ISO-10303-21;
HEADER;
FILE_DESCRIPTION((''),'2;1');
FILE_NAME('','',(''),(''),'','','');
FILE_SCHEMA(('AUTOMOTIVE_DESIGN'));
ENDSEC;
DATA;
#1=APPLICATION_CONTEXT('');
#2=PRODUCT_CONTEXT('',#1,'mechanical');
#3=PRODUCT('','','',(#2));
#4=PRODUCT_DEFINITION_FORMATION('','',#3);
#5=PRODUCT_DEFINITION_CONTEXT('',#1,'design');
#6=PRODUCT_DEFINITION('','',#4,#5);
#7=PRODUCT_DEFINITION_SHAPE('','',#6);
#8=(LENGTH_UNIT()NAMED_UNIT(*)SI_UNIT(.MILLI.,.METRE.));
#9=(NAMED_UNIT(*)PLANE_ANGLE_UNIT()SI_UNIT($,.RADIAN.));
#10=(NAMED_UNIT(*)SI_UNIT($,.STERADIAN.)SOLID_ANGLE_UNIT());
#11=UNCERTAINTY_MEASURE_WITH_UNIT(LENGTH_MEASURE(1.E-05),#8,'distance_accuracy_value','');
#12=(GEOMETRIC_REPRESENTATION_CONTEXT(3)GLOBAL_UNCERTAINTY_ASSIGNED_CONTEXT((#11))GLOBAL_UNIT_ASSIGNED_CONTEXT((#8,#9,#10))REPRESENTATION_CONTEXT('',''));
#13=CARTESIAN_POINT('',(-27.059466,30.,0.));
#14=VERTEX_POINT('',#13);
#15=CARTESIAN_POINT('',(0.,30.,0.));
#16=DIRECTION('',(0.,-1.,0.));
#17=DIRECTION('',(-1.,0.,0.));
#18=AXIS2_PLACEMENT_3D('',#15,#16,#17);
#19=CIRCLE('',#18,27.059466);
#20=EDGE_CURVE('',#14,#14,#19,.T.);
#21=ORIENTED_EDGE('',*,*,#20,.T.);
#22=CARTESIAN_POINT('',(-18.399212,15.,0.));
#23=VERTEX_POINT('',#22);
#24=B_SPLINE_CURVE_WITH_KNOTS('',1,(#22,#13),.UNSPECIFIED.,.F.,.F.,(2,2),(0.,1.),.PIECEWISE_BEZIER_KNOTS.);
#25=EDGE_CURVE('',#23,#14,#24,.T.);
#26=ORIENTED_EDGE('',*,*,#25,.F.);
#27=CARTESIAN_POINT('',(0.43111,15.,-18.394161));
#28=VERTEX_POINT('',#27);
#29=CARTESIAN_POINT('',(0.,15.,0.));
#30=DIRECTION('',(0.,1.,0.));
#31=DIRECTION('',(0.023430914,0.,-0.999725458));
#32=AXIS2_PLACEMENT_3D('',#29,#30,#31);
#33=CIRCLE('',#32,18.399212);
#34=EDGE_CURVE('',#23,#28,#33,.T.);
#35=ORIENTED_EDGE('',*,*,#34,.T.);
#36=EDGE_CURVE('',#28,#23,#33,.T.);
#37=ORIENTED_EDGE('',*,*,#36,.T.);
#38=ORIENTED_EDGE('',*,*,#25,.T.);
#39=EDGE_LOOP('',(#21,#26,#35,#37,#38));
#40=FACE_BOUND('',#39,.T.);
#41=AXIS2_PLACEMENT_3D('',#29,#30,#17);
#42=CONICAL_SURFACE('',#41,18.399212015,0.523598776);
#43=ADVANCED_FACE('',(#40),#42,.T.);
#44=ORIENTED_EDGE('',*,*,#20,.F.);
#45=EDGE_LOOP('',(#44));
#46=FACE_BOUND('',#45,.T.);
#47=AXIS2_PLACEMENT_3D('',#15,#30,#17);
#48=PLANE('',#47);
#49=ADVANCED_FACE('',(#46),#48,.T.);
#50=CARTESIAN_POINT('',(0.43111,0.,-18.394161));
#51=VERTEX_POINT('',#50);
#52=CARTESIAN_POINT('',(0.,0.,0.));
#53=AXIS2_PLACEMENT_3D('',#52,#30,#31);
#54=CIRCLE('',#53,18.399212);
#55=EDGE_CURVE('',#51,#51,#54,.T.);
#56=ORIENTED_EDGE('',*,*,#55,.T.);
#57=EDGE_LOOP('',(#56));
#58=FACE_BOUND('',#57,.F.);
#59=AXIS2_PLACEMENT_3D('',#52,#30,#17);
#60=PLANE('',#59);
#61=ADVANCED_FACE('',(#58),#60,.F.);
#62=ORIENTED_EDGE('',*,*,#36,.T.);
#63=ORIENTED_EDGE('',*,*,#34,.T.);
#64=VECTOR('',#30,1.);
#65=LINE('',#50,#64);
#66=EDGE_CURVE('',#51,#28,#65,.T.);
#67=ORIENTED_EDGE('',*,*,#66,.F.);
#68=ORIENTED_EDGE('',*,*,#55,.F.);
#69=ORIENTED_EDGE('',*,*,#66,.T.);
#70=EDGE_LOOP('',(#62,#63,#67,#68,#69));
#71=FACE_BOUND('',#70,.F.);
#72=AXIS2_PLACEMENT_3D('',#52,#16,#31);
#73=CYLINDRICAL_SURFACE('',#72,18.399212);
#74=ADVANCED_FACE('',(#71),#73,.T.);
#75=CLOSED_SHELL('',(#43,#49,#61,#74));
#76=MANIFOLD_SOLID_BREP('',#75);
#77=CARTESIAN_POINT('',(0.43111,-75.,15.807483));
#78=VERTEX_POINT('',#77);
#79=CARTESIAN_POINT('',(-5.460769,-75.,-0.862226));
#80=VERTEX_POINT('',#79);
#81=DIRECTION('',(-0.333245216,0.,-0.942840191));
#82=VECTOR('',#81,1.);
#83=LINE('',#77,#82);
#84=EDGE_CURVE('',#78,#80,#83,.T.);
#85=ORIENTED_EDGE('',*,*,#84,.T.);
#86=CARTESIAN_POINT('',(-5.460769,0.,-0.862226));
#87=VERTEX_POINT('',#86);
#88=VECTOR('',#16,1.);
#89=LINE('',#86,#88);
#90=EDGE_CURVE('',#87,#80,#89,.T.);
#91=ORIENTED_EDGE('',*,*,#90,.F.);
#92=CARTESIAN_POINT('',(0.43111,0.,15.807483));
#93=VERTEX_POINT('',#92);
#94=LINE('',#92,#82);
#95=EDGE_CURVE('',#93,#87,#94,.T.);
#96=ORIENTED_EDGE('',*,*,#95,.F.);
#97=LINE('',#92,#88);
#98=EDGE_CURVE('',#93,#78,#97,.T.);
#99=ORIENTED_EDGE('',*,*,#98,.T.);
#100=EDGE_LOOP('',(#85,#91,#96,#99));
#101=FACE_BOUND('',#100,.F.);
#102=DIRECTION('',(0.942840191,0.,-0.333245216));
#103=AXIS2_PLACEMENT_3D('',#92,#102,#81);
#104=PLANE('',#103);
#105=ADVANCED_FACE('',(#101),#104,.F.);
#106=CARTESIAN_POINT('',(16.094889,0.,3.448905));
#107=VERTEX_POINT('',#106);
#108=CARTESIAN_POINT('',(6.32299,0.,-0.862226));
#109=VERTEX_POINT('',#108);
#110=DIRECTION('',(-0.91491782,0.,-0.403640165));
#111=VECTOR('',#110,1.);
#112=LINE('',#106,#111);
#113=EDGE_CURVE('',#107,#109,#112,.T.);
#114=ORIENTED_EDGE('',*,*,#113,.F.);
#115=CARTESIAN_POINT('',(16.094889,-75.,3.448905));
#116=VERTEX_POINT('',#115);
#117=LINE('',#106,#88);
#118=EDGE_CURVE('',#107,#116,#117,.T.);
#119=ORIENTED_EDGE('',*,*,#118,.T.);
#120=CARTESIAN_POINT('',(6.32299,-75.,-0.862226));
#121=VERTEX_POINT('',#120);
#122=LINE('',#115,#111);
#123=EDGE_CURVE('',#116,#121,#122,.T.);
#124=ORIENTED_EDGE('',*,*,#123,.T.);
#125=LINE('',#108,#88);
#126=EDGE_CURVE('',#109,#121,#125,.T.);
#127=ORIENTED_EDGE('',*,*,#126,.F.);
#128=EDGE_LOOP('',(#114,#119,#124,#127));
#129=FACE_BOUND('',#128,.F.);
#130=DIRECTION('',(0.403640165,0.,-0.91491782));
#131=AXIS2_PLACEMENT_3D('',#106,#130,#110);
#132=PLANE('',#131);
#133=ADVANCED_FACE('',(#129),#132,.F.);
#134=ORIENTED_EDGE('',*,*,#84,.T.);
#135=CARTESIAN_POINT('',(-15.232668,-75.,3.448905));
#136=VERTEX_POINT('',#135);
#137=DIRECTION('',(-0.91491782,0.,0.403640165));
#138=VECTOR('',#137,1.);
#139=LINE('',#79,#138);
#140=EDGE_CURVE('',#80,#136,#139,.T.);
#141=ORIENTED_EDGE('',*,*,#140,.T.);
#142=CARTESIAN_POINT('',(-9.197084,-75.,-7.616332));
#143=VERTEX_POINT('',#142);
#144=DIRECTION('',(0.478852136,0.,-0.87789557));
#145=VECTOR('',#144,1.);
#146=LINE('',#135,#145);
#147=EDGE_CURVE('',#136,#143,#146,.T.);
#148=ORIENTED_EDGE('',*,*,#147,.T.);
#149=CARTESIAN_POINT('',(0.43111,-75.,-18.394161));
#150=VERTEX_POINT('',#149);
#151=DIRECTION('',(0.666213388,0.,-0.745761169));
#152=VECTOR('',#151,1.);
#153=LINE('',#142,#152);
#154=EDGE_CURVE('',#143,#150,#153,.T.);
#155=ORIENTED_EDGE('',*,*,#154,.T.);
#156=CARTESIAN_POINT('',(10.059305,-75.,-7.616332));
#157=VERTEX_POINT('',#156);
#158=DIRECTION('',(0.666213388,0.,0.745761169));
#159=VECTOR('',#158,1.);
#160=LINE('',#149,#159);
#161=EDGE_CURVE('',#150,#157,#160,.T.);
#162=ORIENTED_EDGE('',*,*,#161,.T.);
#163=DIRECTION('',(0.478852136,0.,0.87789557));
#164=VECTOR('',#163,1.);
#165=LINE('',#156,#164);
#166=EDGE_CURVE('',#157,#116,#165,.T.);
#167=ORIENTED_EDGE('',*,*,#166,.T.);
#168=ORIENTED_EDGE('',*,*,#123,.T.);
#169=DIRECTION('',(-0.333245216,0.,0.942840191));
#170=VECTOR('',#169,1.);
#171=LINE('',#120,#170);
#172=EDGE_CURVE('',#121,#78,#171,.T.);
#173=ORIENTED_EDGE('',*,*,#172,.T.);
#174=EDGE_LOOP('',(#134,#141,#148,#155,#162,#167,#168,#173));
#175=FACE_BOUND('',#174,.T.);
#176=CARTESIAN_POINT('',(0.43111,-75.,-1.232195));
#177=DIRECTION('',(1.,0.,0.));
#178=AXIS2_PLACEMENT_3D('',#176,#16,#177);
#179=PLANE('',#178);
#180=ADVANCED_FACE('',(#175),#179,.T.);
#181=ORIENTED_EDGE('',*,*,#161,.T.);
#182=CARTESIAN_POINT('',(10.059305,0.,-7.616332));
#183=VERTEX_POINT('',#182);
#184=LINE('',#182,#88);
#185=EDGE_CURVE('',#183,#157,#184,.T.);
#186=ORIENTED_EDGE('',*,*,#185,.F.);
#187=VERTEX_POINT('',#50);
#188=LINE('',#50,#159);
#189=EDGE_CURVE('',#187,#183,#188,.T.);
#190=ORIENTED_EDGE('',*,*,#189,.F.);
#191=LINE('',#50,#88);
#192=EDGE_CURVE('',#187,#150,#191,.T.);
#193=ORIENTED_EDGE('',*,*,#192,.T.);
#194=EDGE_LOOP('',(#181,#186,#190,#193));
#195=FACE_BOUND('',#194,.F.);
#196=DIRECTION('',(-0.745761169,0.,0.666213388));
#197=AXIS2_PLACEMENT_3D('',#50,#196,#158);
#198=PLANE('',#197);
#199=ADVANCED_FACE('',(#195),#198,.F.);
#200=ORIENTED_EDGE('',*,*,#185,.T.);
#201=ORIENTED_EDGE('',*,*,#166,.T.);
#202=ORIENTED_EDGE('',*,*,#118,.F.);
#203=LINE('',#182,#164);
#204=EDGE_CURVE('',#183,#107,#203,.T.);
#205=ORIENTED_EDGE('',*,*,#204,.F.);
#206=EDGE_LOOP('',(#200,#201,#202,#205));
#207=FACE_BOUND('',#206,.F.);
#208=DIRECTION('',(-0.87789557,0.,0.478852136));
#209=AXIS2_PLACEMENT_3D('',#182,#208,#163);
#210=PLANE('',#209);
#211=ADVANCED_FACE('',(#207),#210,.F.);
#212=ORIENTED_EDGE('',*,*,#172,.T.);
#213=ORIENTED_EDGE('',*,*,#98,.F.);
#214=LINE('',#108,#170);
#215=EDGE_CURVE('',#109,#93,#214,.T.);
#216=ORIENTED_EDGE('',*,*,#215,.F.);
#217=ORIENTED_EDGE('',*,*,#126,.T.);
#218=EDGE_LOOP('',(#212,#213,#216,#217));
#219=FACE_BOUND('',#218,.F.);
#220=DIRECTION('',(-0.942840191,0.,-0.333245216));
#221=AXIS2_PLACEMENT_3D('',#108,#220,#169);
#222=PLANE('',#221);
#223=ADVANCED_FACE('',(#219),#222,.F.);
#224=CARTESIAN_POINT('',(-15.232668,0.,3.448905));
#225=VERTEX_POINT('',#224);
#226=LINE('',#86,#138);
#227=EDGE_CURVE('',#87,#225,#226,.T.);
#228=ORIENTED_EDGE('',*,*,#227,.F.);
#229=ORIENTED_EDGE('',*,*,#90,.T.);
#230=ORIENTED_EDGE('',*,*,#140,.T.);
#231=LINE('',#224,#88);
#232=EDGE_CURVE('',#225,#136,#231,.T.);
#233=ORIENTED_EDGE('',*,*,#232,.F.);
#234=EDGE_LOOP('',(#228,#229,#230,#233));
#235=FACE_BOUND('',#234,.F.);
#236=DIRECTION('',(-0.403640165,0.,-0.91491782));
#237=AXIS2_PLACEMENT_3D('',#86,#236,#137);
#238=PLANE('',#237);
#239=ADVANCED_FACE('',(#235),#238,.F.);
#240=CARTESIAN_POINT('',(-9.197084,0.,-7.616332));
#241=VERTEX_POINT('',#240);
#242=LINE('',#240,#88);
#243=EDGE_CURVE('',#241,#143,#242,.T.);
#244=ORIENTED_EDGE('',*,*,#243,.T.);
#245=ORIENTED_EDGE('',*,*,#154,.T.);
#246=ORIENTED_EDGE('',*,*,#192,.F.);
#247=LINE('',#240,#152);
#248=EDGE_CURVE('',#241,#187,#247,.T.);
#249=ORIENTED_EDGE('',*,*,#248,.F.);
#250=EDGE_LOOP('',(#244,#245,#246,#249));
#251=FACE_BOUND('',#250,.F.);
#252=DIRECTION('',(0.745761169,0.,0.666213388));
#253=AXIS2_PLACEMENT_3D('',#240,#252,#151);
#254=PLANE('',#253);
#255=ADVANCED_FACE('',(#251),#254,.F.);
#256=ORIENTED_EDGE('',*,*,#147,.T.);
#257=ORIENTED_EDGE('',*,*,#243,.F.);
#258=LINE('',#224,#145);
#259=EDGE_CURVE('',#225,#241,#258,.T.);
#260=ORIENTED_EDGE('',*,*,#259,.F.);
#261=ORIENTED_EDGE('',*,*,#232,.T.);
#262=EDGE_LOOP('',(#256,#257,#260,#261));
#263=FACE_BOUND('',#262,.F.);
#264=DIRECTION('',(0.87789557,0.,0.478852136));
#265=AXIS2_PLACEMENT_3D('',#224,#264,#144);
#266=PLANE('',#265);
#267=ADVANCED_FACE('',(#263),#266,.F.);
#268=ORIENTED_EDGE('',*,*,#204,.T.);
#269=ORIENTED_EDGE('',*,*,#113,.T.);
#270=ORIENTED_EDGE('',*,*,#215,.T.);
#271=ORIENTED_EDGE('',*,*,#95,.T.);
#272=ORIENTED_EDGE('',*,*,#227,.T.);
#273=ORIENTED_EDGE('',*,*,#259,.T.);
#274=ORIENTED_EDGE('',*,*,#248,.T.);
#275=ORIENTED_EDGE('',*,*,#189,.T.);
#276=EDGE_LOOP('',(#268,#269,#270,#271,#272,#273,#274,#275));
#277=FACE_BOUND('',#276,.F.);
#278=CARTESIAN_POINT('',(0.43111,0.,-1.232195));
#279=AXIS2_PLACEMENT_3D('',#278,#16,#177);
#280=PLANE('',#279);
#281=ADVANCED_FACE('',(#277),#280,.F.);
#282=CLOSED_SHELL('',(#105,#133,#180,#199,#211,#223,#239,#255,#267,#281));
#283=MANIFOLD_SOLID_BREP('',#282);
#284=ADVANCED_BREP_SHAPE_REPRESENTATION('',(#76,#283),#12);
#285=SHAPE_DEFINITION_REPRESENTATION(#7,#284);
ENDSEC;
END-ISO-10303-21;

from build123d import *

# Parameters (mm, degrees)
F1_DEPTH  = 75
F3_DEPTH  = 15
F3_FACE_R = 18.3992120147
F4_DEPTH  = 15
F4_TAPER  = -30


with BuildPart() as f1:
    # F0 (on Front) → F1 (new body)
    with BuildSketch(Plane.XZ):
        Polygon((-15.2326680545, 3.4489048412), (-9.1970840294, -7.6163323829), (0.4311103548, -18.3941606665), (10.0593047391, -7.6163323829), (16.0948887642, 3.4489048412), (6.3229899097, -0.8622264722), (0.4311103548, 15.8074827632), (-5.4607692, -0.8622264722), align=None)
    extrude(amount=F1_DEPTH)


with BuildPart() as f3:
    # F2 (on face) → F3 (new body)
    with BuildSketch(Plane(origin=(0, 0, 0), x_dir=(-1, 0, 0), z_dir=(0, 1, 0))):
        with BuildLine():
            ThreePointArc((-0.4311103548, -18.3941606665), (12.8568836026, -13.161745583), (18.3992120147, 0))
            ThreePointArc((18.3992120147, 0), (-12.8568836026, 13.161745583), (-0.4311103548, -18.3941606665))
        make_face()
        Polygon((9.1970840294, -7.6163323829), (-0.4311103548, -18.3941606665), (-10.0593047391, -7.6163323829), (-16.0948887642, 3.4489048412), (-6.3229899097, -0.8622264722), (-0.4311103548, 15.8074827632), (5.4607692, -0.8622264722), (15.2326680545, 3.4489048412), align=None, mode=Mode.SUBTRACT)
        Polygon((-10.0593047391, -7.6163323829), (-0.4311103548, -18.3941606665), (9.1970840294, -7.6163323829), (15.2326680545, 3.4489048412), (5.4607692, -0.8622264722), (-0.4311103548, 15.8074827632), (-6.3229899097, -0.8622264722), (-16.0948887642, 3.4489048412), align=None)
    extrude(amount=F3_DEPTH)

    # F3_face (on face) → F4 (join)
    with BuildSketch(Plane(origin=(0, 15, 0), x_dir=(-1, 0, 0), z_dir=(0, 1, 0))):
        Circle(F3_FACE_R)
    extrude(amount=F4_DEPTH, taper=F4_TAPER)


solid = Compound([f1.part, f3.part])
